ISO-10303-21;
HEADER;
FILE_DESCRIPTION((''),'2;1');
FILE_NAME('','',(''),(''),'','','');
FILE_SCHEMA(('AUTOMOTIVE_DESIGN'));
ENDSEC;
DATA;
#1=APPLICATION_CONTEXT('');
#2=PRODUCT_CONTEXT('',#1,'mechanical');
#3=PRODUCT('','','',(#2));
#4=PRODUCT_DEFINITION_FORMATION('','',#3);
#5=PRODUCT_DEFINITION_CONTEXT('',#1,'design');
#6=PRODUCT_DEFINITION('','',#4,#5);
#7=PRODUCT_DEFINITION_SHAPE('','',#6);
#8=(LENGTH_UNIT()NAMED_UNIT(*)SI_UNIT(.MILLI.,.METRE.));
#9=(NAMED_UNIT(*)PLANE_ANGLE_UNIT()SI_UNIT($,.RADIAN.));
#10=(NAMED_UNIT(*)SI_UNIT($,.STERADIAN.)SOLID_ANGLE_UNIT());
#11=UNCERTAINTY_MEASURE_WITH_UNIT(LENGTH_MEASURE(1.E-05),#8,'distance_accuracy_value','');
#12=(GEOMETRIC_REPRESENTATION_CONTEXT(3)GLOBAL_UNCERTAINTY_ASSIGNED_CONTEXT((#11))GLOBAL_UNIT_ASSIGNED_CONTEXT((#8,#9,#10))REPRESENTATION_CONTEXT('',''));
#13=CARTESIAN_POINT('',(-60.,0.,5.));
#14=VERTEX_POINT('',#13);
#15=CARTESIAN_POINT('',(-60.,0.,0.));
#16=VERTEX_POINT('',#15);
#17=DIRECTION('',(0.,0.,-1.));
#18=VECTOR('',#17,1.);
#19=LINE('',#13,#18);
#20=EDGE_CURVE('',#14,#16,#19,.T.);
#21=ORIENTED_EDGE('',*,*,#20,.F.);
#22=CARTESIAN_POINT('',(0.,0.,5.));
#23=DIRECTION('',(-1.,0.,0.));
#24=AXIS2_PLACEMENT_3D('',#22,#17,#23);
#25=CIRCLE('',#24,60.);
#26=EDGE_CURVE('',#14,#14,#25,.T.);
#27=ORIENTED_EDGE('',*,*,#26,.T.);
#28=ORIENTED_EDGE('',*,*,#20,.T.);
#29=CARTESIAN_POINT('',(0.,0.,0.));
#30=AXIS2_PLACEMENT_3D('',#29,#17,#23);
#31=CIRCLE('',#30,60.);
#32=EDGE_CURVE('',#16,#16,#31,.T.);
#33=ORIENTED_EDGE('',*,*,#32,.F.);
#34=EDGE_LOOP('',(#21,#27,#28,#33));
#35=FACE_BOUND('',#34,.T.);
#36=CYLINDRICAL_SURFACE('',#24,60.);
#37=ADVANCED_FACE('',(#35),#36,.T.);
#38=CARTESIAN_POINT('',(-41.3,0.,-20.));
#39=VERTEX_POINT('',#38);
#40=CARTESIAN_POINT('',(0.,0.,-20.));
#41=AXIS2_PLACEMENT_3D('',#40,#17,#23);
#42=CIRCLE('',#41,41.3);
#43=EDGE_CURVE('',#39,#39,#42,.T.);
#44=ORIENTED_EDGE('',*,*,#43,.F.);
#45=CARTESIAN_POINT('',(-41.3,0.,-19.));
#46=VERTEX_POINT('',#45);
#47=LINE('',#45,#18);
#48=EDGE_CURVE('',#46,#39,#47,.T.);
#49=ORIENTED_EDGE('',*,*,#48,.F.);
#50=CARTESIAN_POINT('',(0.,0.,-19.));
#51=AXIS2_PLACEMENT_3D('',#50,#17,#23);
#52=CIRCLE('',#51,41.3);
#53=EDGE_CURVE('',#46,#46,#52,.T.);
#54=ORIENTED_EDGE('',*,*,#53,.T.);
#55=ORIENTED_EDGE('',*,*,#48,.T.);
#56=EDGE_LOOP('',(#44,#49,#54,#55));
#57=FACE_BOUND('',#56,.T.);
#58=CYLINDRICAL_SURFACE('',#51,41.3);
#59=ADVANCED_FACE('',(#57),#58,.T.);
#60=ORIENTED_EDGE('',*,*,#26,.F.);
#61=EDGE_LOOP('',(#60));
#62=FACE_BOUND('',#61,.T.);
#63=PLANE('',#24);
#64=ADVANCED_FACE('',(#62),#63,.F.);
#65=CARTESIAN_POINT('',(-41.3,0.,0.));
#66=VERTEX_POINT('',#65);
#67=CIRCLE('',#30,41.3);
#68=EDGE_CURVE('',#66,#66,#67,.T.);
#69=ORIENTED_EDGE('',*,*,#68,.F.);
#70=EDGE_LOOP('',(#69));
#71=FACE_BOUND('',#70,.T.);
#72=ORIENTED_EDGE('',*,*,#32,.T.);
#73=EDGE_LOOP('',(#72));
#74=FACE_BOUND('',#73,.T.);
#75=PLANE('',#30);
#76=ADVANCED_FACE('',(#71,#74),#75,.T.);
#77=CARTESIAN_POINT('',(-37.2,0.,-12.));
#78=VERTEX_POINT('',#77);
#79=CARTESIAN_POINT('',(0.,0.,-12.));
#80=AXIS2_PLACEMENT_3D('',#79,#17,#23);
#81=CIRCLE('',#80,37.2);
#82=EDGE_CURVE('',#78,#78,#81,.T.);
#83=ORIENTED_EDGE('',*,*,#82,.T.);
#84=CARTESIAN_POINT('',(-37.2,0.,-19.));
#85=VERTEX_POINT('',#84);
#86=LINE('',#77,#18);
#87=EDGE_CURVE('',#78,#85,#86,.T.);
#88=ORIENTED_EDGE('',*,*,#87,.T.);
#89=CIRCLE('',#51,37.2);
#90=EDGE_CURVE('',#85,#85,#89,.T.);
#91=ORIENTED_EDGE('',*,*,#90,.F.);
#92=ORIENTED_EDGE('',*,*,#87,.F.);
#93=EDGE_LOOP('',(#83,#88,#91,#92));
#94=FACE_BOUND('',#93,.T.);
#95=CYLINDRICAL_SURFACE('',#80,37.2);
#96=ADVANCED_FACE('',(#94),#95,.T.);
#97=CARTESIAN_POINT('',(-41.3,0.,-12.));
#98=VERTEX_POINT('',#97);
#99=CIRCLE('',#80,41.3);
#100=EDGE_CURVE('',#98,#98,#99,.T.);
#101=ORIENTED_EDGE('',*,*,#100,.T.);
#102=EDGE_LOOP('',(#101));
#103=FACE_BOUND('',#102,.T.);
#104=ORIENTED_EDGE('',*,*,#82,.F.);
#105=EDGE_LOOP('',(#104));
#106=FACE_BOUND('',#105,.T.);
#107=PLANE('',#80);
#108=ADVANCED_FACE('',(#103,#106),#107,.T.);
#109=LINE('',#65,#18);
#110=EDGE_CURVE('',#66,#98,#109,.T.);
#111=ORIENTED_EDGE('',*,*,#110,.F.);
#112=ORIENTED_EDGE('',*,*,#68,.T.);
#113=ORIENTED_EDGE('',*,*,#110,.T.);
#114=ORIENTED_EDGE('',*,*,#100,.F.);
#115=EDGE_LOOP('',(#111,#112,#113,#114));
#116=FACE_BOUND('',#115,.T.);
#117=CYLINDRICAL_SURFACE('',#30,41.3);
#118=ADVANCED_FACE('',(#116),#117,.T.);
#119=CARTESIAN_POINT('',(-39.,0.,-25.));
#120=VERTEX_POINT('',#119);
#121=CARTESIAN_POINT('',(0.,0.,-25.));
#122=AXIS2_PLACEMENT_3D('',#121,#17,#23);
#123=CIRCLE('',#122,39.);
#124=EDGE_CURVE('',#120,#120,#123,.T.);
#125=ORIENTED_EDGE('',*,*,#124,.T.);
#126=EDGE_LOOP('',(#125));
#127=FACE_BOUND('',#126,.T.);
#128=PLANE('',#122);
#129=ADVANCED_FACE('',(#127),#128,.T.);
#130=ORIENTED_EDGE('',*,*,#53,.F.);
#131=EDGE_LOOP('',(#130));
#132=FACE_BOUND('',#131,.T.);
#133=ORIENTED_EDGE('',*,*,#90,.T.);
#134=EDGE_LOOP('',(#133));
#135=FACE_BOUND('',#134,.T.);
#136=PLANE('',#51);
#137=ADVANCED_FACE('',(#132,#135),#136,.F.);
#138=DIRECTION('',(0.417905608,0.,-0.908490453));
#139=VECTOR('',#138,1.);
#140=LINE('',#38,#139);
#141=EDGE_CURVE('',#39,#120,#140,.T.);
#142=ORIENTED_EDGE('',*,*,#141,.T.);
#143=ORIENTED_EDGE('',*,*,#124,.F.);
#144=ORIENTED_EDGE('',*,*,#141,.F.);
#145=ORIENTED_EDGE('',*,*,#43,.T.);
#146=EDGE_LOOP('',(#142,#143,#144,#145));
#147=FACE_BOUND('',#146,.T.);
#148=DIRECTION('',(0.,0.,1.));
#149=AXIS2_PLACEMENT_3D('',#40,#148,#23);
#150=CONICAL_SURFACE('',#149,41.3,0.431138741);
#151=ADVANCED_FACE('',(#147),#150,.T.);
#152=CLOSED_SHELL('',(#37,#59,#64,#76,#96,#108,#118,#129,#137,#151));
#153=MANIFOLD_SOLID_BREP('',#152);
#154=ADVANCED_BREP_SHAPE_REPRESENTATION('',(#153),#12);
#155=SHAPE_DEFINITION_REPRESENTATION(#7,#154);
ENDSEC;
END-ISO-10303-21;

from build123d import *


# Not quite as in the source:
# - a feature names something its author has since deleted; it is built from what else it names


with BuildPart() as f1:
    # F0 (on Front) → F1 (revolve)
    with BuildSketch(Plane.XZ):
        Polygon((0, -12.5), (0, -12), (0, 0), (0, 5), (-60, 5), (-60, 0), (-47.5, 0), (-41.3, 0), (-41.3, -12), (-37.2, -12), (-37.2, -19), (-41.3, -19), (-41.3, -20), (-39, -25), (0, -25), align=None)
    revolve(axis=Axis((0, 0, -12.5), (0, 0, -1)))


solid = f1.part
